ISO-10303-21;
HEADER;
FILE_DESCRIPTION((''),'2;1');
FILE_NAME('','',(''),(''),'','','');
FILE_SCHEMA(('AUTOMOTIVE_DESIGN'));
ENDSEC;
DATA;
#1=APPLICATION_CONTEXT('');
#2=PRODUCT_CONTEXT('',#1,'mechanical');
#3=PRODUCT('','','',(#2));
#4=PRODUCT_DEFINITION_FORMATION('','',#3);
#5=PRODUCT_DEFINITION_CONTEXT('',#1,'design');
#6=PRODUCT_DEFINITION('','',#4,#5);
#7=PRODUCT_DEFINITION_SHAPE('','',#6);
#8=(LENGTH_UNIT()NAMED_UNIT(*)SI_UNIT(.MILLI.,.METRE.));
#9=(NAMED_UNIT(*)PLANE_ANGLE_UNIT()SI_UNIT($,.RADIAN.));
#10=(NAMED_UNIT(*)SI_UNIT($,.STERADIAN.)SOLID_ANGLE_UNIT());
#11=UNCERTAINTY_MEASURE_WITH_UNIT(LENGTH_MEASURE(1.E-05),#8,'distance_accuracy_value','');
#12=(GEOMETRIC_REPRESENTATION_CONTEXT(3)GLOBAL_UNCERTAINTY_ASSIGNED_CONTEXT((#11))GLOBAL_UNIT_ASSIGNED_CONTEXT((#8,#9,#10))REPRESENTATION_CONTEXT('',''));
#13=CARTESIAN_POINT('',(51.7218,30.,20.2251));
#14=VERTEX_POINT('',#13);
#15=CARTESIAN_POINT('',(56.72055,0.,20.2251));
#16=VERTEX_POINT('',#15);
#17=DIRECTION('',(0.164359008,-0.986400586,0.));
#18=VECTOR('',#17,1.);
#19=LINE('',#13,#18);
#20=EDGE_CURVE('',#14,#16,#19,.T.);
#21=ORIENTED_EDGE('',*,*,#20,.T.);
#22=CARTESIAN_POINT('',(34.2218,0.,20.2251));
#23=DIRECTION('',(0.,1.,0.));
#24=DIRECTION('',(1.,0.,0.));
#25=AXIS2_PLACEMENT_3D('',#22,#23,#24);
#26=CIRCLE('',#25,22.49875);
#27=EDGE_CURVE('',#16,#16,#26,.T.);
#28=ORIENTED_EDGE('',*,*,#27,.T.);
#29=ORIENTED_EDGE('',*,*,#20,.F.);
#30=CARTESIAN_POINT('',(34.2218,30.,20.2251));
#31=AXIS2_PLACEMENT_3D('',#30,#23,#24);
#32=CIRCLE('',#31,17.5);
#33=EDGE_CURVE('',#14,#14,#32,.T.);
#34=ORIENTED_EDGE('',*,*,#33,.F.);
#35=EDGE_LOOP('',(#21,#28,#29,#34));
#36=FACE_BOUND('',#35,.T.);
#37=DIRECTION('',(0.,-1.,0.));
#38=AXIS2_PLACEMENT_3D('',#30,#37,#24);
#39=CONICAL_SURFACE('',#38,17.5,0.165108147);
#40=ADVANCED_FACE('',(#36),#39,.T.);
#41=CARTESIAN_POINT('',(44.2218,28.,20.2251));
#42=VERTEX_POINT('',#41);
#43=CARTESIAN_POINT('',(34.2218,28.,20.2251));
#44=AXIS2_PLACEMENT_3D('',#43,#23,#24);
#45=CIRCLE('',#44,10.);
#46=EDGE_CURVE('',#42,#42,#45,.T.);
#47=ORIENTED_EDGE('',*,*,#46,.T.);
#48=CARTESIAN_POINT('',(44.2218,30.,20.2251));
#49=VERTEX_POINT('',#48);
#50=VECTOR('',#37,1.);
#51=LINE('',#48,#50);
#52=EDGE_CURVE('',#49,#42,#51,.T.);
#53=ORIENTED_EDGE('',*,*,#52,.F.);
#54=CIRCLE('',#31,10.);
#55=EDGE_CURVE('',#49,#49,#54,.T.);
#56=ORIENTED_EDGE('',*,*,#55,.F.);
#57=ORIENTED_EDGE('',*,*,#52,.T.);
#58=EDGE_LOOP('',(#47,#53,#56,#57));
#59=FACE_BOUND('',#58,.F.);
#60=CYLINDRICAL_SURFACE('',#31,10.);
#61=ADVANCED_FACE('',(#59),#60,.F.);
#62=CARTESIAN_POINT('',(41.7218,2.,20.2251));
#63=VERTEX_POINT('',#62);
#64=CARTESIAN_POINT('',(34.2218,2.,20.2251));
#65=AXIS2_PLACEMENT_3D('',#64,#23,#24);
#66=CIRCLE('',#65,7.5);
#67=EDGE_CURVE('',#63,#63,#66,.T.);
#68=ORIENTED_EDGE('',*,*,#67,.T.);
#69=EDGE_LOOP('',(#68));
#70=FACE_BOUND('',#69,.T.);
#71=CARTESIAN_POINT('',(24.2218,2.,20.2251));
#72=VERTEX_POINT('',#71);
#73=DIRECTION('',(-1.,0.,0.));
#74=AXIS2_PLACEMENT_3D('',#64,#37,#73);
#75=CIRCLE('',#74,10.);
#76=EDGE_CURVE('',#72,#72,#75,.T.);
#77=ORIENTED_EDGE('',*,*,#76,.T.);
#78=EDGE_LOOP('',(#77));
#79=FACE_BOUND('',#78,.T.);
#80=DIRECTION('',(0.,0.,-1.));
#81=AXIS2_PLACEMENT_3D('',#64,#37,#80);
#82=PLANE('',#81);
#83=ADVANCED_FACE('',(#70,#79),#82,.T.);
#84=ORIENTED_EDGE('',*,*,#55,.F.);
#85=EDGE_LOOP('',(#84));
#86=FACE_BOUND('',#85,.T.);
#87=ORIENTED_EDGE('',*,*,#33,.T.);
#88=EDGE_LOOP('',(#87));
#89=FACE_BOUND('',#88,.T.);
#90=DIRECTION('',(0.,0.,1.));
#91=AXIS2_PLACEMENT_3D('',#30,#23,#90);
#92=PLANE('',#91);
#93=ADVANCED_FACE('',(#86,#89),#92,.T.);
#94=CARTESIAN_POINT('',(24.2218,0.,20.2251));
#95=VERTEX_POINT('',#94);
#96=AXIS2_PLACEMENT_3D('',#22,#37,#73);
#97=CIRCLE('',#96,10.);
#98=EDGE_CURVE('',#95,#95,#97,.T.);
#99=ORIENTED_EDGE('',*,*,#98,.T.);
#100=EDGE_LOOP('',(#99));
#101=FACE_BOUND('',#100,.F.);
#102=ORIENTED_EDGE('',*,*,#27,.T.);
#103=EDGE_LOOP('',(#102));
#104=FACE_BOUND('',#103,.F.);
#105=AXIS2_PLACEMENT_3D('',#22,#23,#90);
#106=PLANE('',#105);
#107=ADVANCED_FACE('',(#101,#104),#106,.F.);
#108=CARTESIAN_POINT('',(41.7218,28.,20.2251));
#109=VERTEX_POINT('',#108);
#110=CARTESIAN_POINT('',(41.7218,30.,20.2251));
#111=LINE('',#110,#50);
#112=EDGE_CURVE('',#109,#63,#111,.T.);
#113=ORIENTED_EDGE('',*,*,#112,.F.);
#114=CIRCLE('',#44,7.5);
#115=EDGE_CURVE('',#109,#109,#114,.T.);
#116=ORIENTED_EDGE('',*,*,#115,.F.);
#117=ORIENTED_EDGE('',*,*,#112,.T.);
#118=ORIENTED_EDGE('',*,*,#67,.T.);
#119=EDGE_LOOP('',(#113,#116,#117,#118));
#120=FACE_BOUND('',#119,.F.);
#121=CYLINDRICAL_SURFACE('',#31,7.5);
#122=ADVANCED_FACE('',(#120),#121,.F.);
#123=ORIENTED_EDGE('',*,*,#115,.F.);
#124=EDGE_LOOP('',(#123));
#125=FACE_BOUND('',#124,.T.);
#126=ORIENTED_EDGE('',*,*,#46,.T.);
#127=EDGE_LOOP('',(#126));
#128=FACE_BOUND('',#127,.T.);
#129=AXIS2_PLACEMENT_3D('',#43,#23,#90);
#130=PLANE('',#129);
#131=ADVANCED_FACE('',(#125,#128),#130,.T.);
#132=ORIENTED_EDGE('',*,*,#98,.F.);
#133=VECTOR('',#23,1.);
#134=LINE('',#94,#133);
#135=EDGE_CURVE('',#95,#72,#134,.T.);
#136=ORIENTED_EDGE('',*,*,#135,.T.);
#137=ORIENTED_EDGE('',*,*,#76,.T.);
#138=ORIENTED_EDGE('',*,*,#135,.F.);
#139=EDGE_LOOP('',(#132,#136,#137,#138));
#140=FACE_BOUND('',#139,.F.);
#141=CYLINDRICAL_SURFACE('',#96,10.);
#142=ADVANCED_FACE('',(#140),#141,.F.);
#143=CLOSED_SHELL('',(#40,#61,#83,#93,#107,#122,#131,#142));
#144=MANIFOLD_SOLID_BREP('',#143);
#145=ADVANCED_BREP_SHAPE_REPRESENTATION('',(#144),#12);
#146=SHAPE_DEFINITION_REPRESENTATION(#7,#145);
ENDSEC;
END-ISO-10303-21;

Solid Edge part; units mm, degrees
sketch "Sketch1" plane through (0, 0, 0) normal (0, -1, 0) x (1, 0, 0)
  circle A0 centre (34.2218, 20.2251) radius 7.5
  circle A1 centre (34.2218, 20.2251) radius 15
extrude "Protrusion1" add sketch "Sketch1" against normal blind 30
sketch "Sketch2" plane through (34.2218, 30, 20.2251) normal (0, 1, 0) x (1, 0, 0)
  circle A0 centre (0, 0) radius 17.5
extrude "ExtrudedProtrusion_2" add sketch "Sketch2" against normal blind 30
sketch "Sketch3" plane through (34.2218, 30, 20.2251) normal (0, 1, 0) x (1, 0, 0)
  circle A0 centre (0, 0) radius 7.5
extrude "ExtrudedCutout_1" cut sketch "Sketch3" against normal blind 30
draft "Draft_1" angle 9.46 neutral plane through (34.2218, 30, 20.2251) normal (0, 1, 0) pull direction (0, 1, 0) face at (43.9062, 5.3, 5.649) face at (38.3722, 5.3, 13.9782)
sketch "Sketch4" plane through (34.2218, 30, 20.2251) normal (0, 1, 0) x (1, 0, 0)
  circle A0 centre (0, 0) radius 7.5
extrude "ExtrudedCutout_2" cut sketch "Sketch4" against normal blind 30
sketch "Sketch5" plane through (34.2218, 30, 20.2251) normal (0, 1, 0) x (1, 0, 0)
  circle A0 centre (0, 0) radius 10
extrude "ExtrudedCutout_3" cut sketch "Sketch5" against normal blind 2
sketch "Sketch6" plane through (34.2218, 0, 20.2251) normal (0, -1, 0) x (-1, 0, 0)
  circle A0 centre (0, 0) radius 10
extrude "ExtrudedCutout_4" cut sketch "Sketch6" against normal blind 2
